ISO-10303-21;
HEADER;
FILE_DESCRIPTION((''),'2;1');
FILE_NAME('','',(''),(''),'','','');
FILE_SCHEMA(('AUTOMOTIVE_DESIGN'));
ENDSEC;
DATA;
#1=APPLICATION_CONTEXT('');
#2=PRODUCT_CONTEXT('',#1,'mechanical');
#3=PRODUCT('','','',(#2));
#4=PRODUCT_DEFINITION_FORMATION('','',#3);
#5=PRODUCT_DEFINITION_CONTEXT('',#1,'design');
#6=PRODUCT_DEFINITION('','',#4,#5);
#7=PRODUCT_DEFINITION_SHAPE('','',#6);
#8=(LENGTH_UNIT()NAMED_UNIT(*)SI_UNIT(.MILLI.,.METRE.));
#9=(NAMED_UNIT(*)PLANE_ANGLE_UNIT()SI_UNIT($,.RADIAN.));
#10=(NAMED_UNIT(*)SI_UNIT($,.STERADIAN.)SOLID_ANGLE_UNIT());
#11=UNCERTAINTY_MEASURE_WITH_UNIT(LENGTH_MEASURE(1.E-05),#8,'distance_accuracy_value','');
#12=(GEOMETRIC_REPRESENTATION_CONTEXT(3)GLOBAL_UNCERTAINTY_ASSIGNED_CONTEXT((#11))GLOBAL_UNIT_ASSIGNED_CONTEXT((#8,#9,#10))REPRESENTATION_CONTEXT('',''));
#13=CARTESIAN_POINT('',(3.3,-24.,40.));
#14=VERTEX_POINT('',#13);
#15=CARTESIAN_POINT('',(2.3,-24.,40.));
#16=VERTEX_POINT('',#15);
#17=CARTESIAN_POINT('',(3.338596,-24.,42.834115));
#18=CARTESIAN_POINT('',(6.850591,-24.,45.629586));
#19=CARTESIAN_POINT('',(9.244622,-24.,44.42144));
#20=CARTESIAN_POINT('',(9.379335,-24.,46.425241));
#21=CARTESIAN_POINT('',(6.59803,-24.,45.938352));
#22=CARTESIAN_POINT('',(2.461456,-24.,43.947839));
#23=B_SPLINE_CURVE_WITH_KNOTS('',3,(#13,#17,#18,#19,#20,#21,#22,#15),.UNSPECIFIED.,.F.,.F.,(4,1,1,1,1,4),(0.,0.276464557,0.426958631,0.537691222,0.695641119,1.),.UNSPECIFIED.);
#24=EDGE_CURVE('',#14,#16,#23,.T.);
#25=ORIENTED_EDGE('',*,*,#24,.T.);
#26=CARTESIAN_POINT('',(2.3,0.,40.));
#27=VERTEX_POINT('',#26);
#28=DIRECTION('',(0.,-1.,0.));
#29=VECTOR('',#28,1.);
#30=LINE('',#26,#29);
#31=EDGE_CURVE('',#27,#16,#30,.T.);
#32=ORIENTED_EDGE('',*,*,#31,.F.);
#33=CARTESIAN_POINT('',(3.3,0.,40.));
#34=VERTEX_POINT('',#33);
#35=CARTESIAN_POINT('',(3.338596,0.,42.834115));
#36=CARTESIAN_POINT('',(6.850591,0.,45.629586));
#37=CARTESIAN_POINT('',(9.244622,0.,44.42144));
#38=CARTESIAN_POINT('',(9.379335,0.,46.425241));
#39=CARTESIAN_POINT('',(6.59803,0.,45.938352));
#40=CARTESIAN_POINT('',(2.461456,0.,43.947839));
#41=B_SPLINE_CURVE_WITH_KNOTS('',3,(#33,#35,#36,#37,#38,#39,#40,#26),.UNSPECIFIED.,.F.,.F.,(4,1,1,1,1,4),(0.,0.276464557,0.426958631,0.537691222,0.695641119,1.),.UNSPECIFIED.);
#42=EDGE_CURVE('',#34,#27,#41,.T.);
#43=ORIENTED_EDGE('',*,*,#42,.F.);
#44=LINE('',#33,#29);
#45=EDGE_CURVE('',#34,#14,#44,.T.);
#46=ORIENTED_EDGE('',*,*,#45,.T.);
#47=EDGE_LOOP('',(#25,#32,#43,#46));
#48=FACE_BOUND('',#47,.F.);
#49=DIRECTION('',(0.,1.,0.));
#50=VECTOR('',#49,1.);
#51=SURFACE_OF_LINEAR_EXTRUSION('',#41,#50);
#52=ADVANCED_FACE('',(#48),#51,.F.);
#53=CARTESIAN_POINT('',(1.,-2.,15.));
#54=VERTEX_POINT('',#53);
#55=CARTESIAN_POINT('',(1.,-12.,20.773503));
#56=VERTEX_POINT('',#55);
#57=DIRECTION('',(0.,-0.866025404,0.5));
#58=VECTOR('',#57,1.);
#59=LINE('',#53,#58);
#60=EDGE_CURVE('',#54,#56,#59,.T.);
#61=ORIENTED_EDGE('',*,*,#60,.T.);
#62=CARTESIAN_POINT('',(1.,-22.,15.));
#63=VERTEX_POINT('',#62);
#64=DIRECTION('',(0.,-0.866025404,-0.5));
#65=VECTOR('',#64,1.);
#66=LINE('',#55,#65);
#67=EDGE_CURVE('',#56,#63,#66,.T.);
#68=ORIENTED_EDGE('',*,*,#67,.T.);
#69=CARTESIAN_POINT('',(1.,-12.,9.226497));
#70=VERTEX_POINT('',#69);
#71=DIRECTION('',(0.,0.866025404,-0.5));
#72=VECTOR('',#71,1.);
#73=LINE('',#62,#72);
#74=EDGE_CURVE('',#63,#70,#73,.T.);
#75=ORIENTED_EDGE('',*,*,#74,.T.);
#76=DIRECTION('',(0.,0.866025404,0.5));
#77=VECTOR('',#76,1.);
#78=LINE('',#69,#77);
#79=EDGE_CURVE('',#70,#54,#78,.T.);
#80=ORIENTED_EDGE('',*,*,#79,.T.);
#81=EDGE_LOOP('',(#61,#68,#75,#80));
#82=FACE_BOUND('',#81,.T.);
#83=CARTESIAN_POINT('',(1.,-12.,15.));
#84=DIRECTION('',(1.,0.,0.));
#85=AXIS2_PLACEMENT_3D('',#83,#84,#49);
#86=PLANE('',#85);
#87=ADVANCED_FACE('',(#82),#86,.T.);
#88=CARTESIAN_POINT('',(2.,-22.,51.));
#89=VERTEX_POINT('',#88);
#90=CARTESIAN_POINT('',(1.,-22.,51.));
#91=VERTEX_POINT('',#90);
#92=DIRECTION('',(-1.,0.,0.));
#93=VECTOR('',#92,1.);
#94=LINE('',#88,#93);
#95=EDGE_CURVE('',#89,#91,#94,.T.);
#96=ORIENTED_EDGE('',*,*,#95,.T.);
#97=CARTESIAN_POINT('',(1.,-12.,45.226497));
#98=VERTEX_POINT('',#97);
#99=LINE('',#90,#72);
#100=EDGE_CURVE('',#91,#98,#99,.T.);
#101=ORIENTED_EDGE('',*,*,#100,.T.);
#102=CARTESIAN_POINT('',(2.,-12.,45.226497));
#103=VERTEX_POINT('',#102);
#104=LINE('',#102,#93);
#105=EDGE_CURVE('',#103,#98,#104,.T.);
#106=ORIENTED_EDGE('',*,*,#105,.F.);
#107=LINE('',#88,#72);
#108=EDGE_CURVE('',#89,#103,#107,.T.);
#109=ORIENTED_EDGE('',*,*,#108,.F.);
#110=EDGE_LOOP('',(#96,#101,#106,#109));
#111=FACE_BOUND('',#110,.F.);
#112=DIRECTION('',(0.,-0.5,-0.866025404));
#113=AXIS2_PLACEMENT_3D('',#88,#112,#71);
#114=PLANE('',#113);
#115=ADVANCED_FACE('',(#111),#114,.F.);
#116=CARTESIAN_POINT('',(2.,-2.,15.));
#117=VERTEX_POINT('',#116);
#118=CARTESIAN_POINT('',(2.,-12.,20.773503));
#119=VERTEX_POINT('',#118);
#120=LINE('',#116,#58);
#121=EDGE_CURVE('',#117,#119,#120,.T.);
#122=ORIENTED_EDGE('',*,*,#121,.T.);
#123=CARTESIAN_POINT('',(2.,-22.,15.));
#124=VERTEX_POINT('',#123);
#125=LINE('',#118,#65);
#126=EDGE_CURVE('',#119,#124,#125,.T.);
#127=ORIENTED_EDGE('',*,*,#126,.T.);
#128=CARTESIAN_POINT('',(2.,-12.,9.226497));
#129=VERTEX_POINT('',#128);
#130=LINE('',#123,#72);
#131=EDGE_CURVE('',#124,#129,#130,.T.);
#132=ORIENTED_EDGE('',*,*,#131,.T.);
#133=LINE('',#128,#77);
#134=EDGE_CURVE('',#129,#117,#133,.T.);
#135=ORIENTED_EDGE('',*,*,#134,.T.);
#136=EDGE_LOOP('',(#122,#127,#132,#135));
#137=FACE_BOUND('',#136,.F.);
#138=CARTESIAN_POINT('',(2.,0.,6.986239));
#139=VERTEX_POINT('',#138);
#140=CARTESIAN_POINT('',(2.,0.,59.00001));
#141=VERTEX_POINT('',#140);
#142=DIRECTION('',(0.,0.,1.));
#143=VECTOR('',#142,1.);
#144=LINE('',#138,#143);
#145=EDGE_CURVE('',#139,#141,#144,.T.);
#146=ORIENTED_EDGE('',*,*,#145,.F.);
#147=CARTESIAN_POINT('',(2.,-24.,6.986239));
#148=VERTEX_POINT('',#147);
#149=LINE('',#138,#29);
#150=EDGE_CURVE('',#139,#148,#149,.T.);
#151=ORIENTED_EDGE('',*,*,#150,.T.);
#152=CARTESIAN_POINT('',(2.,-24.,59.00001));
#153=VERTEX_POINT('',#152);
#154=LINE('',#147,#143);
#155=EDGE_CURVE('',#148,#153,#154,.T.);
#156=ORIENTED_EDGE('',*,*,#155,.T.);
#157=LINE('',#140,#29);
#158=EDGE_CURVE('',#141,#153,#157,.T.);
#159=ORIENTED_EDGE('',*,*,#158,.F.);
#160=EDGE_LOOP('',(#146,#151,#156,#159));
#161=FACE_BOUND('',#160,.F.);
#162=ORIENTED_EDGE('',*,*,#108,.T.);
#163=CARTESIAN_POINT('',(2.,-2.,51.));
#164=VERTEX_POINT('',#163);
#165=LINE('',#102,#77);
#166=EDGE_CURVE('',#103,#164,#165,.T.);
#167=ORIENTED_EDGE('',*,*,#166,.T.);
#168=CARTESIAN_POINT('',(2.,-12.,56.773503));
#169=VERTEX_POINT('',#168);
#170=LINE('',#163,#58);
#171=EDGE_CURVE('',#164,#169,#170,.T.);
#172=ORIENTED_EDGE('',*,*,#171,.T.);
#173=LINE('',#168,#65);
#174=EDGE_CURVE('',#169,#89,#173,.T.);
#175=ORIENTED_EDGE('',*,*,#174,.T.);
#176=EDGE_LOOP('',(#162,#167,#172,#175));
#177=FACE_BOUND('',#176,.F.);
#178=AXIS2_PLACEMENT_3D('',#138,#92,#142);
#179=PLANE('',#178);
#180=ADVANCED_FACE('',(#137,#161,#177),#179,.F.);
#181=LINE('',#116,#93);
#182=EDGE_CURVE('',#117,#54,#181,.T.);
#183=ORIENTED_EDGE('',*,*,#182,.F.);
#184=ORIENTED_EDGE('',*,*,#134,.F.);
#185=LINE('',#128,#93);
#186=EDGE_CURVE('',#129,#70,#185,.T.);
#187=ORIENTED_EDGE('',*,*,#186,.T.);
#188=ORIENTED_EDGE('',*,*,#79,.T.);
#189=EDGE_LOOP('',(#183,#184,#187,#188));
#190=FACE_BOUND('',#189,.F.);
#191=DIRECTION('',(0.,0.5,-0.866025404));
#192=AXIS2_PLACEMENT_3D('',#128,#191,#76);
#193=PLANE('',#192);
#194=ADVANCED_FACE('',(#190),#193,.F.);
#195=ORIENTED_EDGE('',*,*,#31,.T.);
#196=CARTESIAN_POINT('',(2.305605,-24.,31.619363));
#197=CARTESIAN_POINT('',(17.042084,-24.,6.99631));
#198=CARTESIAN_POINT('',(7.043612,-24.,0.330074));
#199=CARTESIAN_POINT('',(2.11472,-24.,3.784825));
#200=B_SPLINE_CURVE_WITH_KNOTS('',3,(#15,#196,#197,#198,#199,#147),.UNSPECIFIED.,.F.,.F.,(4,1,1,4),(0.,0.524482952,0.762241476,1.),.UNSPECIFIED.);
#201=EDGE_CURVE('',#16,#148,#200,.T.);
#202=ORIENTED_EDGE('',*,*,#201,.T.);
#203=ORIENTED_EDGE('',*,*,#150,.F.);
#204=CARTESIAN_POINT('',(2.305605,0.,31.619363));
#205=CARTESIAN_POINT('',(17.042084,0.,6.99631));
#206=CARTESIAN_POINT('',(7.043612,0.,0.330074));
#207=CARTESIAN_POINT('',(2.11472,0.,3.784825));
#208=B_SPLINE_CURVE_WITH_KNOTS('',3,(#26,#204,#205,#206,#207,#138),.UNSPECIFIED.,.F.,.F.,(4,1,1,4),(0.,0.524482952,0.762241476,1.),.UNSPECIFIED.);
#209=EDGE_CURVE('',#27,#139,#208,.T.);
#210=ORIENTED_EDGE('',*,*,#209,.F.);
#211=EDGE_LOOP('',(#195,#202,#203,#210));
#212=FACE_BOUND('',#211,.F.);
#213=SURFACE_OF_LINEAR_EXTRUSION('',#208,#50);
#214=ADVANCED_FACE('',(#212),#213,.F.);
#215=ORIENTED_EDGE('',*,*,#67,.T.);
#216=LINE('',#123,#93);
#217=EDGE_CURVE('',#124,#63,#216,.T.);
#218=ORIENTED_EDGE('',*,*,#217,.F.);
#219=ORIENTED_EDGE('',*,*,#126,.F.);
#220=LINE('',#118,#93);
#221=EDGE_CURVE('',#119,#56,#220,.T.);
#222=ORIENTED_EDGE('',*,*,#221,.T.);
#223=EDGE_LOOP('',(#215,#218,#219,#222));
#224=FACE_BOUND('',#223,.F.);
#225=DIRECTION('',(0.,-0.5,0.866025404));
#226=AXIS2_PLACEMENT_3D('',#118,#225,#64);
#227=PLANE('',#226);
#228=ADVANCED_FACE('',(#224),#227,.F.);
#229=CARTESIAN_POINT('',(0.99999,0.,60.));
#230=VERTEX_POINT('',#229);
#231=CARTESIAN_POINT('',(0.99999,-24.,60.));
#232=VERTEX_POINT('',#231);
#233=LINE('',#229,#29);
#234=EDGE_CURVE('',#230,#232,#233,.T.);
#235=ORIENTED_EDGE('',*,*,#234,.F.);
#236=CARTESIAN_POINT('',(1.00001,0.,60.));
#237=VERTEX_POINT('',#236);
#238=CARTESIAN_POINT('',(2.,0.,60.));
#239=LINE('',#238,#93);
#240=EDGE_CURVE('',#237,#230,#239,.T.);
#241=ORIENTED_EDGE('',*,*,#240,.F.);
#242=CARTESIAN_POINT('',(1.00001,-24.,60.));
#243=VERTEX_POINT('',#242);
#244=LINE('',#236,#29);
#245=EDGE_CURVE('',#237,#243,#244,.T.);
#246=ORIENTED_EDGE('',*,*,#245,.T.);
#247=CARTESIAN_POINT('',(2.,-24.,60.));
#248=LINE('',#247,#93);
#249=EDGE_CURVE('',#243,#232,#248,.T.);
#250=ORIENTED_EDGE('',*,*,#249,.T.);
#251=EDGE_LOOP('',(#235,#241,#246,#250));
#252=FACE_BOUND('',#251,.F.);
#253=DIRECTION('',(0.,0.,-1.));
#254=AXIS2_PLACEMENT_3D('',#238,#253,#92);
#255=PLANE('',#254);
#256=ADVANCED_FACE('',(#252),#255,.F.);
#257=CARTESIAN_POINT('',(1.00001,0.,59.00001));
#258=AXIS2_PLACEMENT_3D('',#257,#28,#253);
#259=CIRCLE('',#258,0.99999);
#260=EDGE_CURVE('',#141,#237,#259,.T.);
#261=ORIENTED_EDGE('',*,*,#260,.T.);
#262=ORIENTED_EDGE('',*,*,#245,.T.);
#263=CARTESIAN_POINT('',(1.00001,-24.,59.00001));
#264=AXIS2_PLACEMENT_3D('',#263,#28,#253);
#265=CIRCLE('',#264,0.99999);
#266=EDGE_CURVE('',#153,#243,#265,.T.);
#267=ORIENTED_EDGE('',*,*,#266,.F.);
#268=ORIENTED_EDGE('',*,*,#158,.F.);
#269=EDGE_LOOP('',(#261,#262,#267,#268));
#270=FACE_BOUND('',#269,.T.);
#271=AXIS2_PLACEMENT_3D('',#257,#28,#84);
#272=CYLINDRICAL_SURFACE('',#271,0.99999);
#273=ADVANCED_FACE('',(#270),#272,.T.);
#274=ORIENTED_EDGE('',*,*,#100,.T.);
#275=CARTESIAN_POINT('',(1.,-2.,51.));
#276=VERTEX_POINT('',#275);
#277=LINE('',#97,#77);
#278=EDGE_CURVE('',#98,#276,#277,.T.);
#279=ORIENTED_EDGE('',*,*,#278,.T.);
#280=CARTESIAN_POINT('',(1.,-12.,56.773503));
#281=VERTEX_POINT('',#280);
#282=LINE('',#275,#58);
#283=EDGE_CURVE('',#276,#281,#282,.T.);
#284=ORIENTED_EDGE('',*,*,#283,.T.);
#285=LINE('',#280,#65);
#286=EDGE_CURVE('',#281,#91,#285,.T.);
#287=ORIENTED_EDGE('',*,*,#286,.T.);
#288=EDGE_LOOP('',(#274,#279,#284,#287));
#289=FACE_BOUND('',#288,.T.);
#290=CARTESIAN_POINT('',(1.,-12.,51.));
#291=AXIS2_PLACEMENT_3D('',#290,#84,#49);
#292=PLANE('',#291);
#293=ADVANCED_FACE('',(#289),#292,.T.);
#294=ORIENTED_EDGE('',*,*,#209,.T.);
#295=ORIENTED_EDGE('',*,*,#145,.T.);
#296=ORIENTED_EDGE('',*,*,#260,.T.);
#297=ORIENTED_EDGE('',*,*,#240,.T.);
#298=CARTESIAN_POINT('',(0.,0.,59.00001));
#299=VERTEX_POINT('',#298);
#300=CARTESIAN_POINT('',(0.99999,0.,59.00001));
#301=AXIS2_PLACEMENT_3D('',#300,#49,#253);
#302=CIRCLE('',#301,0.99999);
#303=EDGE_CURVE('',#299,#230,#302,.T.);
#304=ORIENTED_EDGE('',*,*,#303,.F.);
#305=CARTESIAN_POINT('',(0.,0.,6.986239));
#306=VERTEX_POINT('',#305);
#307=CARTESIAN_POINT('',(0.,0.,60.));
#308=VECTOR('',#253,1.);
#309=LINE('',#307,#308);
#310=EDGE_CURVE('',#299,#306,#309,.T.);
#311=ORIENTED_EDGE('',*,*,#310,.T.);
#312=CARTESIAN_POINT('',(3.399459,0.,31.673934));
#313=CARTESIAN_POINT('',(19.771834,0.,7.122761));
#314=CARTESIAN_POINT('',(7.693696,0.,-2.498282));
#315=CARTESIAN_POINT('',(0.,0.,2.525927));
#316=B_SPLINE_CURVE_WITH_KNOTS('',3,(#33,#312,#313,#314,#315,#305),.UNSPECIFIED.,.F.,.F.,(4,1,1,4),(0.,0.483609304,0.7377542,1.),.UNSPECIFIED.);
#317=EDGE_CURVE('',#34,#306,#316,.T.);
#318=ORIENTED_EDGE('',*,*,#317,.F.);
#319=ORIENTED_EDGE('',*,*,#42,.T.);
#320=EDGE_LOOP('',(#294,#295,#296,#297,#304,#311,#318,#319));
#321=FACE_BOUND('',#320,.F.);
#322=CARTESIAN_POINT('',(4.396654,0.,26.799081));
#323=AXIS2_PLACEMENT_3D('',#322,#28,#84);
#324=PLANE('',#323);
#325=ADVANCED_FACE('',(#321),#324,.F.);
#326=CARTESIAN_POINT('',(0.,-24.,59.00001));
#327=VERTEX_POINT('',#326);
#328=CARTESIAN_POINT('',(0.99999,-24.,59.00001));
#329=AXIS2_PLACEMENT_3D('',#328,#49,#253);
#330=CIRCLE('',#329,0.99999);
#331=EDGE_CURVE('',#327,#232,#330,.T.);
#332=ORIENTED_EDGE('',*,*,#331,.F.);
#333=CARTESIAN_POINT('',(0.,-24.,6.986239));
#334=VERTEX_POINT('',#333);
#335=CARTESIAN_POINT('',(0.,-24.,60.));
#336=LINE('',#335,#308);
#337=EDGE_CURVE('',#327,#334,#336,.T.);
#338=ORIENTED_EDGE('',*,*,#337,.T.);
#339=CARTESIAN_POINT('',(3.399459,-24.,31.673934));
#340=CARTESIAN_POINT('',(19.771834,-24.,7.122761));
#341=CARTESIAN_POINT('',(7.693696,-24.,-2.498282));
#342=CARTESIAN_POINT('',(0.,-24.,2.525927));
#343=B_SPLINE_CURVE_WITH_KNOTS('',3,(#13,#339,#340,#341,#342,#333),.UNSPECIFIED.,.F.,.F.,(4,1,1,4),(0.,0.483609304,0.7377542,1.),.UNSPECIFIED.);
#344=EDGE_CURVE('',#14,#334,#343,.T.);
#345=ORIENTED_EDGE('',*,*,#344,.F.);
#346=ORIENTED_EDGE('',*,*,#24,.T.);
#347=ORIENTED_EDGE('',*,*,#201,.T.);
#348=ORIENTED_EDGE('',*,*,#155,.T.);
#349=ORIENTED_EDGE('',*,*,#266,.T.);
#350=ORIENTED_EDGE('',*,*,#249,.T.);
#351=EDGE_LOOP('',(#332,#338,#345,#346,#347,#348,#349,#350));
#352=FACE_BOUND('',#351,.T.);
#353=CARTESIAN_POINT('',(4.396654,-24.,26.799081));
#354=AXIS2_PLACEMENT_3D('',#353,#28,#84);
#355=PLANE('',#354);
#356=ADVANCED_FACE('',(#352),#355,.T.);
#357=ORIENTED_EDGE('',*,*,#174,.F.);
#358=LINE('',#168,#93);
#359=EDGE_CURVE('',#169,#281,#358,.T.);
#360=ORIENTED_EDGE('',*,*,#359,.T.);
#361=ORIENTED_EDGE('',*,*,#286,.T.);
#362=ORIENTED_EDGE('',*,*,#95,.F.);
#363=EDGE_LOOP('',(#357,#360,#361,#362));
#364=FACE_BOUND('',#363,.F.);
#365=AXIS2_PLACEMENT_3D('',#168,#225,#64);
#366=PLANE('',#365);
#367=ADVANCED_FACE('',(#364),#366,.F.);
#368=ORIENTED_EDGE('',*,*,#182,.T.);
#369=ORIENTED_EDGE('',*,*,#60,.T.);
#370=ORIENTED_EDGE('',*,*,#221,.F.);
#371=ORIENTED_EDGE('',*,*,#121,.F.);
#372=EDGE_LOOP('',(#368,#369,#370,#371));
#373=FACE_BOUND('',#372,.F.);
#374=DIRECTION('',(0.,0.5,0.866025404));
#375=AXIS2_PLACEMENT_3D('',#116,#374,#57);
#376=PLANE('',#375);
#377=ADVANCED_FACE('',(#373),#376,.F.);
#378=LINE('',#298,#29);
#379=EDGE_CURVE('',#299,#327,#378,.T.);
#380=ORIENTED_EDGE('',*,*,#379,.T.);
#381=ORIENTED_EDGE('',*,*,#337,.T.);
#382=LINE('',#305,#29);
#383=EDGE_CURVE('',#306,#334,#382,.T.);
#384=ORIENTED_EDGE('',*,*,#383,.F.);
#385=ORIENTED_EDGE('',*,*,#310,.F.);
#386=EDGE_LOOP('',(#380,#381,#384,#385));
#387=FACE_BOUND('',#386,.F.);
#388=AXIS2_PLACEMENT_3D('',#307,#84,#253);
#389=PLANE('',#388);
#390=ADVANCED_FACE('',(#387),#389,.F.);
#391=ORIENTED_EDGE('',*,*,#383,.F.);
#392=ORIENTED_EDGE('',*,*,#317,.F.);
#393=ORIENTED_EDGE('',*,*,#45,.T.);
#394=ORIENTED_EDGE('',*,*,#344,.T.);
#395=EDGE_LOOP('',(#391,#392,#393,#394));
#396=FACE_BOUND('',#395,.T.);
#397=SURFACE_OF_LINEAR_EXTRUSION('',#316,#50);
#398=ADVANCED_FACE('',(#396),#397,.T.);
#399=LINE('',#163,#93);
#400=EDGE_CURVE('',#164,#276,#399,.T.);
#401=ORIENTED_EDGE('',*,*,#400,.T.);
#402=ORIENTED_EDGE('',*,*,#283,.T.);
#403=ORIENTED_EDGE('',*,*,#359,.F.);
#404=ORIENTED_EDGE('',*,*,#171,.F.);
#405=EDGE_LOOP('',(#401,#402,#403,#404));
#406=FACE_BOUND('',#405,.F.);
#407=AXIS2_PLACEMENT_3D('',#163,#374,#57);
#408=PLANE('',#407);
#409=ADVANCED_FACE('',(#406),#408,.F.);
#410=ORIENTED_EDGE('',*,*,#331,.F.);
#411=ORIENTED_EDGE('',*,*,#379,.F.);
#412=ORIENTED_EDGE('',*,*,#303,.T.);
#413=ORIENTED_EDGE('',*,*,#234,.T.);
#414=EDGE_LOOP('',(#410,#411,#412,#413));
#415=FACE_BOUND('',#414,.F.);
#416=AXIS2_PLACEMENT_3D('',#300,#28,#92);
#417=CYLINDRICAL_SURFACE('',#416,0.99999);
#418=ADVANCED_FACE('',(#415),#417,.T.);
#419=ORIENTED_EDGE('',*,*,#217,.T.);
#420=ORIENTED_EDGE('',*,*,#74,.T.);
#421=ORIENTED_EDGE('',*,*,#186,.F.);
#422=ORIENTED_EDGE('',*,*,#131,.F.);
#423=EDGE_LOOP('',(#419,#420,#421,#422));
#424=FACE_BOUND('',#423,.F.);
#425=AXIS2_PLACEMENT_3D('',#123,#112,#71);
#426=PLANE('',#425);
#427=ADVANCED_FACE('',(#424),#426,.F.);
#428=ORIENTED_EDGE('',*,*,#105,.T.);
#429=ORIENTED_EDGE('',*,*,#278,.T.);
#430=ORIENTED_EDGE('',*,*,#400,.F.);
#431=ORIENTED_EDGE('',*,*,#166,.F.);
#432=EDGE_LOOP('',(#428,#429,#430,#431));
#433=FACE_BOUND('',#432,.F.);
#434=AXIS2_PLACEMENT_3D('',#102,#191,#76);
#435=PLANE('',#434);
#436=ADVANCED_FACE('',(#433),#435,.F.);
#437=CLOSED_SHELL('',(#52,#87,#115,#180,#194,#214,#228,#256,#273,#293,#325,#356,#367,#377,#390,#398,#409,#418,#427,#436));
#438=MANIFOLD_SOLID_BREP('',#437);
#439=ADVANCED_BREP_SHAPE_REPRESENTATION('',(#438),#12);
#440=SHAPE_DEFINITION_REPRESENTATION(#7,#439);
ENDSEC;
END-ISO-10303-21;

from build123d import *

# Parameters (mm, degrees)
F1_DEPTH = 24
F2_R     = 0.99999
F4_DEPTH = 1


# Not quite as in the source:
# - a fillet or chamfer is up to 0.001 mm smaller than in the source, because OpenCascade refuses the exact size


with BuildPart() as f1:
    # F0 (on Front) → F1 (new body)
    with BuildSketch(Plane.XZ):
        with BuildLine():
            Line((0, 60), (0, 6.9862387707))
            add(Edge.make_bspline(
                [(3.3, 40), (3.3994593126, 31.673934298), (19.7718344048, 7.1227607211), (7.6936961489, -2.498282177), (0, 2.5259271248), (0, 6.9862387707)],
                knots=[0, 0, 0, 0, 0.4836093037, 0.7377542004, 1, 1, 1, 1], degree=3))
            add(Edge.make_bspline(
                [(3.3, 40), (3.3385955543, 42.8341147329), (6.8505910401, 45.6295855338), (9.2446222249, 44.4214397924), (9.3793347208, 46.4252407174), (6.598029656, 45.9383519209), (2.4614556728, 43.9478391097), (2.3, 40)],
                knots=[0, 0, 0, 0, 0.2764645571, 0.4269586312, 0.5376912217, 0.6956411188, 1, 1, 1, 1], degree=3))
            add(Edge.make_bspline(
                [(2.3, 40), (2.3056045868, 31.6193630301), (17.0420838494, 6.9963103508), (7.0436122464, 0.330073677), (2.1147195613, 3.7848248686), (2, 6.9862387707)],
                knots=[0, 0, 0, 0, 0.5244829522, 0.7622414761, 1, 1, 1, 1], degree=3))
            Line((2, 6.9862387707), (2, 60))
            Line((2, 60), (0, 60))
        make_face()
    extrude(amount=F1_DEPTH)

    # F2 (radius 1 in the source; OpenCascade refuses exactly that, so slightly less here)
    f2_edges = [f1.edges().sort_by_distance(p)[0] for p in [
        (2, -12, 60),
        (0, -12, 60),
    ]]
    fillet(f2_edges, radius=F2_R)


with BuildPart() as f4:
    # F3 (on face) → F4 (new body)
    with BuildSketch(Plane.YZ.offset(2)):
        Polygon((-12, 56.7735026919), (-22, 51), (-12, 45.2264973081), (-2, 51), align=None)
    extrude(amount=-F4_DEPTH)


with BuildPart() as f1_1:
    add(f1.part)

    # F5: cut F4
    add(f4.part, mode=Mode.SUBTRACT)


with BuildPart() as f4_1:
    # F6: moved
    add(f4.part.moved(Location((0, 0, -36))))


with BuildPart() as f1_2:
    add(f1_1.part)

    # F7: cut F4
    add(f4_1.part, mode=Mode.SUBTRACT)


solid = f1_2.part
